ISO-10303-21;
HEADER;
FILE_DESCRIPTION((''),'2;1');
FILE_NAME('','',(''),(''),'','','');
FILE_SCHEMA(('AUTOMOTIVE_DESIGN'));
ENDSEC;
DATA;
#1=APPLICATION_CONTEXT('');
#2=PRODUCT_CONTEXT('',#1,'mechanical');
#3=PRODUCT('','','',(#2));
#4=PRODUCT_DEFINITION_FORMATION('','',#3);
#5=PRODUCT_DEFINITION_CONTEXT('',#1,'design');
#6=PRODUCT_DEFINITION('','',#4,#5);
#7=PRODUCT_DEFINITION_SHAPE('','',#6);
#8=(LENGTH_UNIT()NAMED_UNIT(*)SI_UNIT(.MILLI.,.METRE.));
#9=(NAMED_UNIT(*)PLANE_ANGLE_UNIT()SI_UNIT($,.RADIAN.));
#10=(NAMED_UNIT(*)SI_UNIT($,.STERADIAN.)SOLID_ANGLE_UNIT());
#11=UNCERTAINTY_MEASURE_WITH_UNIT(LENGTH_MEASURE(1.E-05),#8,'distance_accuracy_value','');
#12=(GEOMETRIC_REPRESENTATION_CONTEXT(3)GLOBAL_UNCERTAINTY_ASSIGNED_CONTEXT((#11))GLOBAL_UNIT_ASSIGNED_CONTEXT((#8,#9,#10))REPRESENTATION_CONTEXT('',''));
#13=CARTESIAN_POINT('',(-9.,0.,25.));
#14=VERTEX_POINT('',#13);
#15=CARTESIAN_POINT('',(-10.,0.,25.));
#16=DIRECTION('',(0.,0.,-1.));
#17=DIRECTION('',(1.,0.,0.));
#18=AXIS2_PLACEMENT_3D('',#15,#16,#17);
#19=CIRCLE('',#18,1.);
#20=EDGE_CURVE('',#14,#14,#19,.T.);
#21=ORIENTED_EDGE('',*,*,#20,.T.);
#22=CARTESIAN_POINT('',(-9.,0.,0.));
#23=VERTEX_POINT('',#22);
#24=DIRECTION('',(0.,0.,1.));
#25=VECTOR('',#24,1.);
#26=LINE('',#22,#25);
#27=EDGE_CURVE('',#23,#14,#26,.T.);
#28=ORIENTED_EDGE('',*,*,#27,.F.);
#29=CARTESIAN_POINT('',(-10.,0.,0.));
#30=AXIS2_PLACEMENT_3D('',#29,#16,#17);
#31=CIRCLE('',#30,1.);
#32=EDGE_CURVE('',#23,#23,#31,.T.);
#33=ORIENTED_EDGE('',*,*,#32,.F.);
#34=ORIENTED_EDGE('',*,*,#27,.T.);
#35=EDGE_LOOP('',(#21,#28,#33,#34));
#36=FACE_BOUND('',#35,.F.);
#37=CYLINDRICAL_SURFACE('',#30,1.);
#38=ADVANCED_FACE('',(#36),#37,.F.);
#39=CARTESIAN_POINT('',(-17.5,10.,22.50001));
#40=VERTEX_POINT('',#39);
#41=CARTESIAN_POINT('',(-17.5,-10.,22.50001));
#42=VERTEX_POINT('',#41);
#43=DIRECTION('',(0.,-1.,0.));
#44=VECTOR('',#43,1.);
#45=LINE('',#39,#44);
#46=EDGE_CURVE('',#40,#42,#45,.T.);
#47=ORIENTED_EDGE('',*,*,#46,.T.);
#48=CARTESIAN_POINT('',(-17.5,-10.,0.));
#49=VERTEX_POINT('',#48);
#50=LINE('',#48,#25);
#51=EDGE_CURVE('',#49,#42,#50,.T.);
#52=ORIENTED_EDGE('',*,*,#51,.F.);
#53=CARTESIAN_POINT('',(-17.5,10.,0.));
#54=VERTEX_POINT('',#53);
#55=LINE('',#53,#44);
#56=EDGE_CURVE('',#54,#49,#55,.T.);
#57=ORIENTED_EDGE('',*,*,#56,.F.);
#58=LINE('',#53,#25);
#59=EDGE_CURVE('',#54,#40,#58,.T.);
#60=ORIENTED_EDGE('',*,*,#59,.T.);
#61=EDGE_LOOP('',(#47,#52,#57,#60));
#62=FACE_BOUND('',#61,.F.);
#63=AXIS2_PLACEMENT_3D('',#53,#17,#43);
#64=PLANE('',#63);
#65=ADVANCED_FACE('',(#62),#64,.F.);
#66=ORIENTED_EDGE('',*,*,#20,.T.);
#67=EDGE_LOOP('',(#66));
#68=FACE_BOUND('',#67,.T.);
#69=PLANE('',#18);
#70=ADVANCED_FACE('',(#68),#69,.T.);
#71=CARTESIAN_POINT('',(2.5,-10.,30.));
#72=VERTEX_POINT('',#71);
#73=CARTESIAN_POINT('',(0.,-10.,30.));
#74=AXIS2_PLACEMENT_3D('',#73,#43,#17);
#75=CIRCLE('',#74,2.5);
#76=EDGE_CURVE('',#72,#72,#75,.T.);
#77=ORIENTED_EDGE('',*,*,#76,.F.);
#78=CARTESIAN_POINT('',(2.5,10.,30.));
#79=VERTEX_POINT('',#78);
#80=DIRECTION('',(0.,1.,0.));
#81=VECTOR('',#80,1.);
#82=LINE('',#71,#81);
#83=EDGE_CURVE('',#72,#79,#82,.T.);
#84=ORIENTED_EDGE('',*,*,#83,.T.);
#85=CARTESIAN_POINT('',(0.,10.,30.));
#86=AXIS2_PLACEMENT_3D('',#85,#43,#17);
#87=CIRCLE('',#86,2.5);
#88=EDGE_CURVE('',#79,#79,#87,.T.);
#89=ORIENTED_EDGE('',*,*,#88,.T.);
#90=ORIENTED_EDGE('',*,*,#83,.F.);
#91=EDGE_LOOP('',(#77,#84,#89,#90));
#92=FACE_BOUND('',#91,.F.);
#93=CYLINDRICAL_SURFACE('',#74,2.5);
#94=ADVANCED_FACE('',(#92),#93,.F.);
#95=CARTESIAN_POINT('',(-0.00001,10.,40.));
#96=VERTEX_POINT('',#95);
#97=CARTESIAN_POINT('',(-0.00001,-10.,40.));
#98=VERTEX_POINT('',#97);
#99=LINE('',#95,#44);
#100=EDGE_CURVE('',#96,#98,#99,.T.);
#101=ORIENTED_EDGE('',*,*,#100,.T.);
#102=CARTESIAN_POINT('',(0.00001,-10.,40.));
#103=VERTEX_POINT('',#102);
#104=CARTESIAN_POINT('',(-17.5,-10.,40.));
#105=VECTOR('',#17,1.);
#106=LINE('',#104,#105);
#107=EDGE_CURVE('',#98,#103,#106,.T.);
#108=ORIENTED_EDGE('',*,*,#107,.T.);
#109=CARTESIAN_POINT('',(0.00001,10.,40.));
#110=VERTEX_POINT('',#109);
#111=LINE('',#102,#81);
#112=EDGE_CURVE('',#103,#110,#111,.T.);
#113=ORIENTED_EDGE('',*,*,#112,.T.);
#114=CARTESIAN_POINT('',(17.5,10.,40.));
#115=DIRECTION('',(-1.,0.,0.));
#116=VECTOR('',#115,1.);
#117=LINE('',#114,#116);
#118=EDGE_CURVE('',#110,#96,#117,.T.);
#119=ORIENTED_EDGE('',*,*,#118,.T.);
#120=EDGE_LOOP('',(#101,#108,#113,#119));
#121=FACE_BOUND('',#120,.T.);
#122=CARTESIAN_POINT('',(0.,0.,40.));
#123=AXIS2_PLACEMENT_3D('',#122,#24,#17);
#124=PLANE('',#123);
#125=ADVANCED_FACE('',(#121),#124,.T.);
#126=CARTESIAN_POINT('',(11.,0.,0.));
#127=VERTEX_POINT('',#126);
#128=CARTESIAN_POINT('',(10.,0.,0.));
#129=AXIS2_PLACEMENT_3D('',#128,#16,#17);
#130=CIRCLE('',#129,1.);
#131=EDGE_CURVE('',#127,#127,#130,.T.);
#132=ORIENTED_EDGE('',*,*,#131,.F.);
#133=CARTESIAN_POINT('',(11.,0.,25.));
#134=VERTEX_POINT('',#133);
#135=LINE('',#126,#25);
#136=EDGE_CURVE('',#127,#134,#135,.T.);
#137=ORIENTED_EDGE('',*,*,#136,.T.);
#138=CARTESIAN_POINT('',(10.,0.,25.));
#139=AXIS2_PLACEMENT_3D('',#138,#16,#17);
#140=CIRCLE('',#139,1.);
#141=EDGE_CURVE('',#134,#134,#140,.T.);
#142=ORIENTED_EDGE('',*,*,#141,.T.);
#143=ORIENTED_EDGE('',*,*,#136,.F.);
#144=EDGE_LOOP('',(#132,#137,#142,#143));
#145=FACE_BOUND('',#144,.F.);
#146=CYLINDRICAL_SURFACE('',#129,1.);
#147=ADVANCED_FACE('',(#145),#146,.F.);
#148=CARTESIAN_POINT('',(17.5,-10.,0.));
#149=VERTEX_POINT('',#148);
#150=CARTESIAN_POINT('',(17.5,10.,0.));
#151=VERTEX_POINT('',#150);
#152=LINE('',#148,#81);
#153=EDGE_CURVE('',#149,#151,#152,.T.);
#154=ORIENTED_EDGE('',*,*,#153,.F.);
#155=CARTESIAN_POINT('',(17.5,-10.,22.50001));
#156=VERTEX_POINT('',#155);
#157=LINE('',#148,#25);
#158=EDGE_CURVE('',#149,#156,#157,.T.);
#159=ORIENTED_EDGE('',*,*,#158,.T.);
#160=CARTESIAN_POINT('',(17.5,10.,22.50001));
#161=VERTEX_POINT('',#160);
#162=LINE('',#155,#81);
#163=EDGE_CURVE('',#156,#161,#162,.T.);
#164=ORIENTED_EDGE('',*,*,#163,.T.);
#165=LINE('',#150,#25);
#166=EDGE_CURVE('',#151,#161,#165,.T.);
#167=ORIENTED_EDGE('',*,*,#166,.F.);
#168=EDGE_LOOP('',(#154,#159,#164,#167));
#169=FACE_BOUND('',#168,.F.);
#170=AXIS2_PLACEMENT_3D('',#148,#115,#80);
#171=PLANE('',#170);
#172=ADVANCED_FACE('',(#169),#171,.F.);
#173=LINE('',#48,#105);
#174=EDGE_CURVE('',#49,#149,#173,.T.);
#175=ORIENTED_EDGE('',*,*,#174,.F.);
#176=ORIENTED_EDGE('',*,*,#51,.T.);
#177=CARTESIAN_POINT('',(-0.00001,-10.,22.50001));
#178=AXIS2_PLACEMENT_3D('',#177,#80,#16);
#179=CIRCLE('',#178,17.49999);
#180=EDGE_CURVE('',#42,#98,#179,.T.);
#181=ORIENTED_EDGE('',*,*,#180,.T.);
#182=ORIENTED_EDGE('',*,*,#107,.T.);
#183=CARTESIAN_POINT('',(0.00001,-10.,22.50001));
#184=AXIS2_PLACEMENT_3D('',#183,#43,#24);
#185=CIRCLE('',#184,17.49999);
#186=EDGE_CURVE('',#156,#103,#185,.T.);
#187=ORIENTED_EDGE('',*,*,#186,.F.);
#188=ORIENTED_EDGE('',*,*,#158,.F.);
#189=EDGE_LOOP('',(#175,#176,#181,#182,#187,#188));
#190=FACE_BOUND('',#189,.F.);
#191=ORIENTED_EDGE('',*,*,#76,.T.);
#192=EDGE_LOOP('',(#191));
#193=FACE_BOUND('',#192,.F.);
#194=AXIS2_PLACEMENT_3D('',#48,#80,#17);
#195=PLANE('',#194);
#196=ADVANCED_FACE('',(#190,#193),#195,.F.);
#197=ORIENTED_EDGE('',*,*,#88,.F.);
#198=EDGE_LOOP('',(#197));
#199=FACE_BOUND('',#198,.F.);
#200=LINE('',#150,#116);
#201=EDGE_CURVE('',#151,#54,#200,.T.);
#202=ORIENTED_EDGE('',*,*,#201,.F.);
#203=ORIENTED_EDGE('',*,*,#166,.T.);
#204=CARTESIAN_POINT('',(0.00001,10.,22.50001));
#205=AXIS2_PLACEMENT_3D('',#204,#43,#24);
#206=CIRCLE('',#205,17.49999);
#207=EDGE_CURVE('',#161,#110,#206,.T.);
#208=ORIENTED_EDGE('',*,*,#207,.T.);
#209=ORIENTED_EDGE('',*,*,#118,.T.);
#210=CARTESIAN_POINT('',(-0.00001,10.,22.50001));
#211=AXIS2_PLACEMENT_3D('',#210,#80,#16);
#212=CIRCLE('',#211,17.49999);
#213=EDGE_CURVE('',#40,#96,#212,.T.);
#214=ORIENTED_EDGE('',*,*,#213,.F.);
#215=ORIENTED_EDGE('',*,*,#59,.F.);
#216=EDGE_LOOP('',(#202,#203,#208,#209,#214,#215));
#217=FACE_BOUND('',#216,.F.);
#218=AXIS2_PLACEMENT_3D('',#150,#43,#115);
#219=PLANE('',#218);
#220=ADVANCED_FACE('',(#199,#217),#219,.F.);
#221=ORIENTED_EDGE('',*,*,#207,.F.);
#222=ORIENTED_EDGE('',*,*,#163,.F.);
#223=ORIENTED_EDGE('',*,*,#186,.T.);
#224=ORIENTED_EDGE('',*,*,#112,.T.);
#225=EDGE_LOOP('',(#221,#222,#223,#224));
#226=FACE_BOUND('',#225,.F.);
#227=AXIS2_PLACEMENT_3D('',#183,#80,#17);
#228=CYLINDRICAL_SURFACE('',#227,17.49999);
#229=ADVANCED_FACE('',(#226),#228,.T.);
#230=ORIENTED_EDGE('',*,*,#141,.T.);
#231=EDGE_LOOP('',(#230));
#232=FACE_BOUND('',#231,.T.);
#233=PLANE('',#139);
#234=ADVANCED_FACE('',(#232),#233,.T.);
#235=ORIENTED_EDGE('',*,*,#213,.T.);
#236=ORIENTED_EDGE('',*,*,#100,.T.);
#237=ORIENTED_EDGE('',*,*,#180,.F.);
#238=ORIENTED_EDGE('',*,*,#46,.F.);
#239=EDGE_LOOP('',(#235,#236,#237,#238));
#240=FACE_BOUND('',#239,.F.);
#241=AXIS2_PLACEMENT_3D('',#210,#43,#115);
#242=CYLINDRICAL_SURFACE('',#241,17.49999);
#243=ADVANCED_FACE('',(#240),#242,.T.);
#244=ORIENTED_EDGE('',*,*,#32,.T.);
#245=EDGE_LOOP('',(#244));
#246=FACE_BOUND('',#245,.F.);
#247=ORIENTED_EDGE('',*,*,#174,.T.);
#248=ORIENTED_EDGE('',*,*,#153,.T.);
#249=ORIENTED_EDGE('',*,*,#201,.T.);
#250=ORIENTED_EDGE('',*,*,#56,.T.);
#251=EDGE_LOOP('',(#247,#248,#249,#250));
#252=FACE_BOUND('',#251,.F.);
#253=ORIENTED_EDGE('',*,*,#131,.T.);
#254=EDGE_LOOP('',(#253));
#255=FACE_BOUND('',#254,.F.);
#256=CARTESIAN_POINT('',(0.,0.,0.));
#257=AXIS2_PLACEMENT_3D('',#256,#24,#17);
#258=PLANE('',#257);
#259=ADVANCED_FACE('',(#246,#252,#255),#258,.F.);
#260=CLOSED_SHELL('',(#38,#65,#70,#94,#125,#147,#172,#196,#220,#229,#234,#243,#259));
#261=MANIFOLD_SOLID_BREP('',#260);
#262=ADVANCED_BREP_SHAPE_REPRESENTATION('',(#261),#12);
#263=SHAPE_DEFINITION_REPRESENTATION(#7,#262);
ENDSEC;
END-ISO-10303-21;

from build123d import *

# Parameters (mm, degrees)
F1_DEPTH = 40
F2_R     = 17.49999
F3_R     = 2.5
F4_DEPTH = 25
F5_R     = 1
F6_DEPTH = 25


# Not quite as in the source:
# - a fillet or chamfer is up to 0.001 mm smaller than in the source, because OpenCascade refuses the exact size


with BuildPart() as f1:
    # F0 (on Top) → F1 (new body)
    with BuildSketch(Plane.XY):
        Polygon((17.5, 10), (0, 10), (-17.5, 10), (-17.5, -10), (17.5, -10), align=None)
    extrude(amount=F1_DEPTH)

    # F2 (radius 17.5 in the source; OpenCascade refuses exactly that, so slightly less here)
    f2_edges = [f1.edges().sort_by_distance(p)[0] for p in [
        (17.5, 0, 40),
        (-17.5, 0, 40),
    ]]
    fillet(f2_edges, radius=F2_R)

    # F3 (on face) → F4 (cut)
    with BuildSketch(Plane.XZ.offset(10)):
        with Locations((0, 30)):
            Circle(F3_R)
    extrude(amount=-F4_DEPTH, mode=Mode.SUBTRACT)

    # F5 (on face) → F6 (cut)
    with BuildSketch(Plane(origin=(0, 0, 0), x_dir=(1, 0, 0), z_dir=(0, 0, -1))):
        with Locations((10, 0)):
            Circle(F5_R)
        with Locations((-10, 0)):
            Circle(F5_R)
    extrude(amount=-F6_DEPTH, mode=Mode.SUBTRACT)


solid = f1.part
